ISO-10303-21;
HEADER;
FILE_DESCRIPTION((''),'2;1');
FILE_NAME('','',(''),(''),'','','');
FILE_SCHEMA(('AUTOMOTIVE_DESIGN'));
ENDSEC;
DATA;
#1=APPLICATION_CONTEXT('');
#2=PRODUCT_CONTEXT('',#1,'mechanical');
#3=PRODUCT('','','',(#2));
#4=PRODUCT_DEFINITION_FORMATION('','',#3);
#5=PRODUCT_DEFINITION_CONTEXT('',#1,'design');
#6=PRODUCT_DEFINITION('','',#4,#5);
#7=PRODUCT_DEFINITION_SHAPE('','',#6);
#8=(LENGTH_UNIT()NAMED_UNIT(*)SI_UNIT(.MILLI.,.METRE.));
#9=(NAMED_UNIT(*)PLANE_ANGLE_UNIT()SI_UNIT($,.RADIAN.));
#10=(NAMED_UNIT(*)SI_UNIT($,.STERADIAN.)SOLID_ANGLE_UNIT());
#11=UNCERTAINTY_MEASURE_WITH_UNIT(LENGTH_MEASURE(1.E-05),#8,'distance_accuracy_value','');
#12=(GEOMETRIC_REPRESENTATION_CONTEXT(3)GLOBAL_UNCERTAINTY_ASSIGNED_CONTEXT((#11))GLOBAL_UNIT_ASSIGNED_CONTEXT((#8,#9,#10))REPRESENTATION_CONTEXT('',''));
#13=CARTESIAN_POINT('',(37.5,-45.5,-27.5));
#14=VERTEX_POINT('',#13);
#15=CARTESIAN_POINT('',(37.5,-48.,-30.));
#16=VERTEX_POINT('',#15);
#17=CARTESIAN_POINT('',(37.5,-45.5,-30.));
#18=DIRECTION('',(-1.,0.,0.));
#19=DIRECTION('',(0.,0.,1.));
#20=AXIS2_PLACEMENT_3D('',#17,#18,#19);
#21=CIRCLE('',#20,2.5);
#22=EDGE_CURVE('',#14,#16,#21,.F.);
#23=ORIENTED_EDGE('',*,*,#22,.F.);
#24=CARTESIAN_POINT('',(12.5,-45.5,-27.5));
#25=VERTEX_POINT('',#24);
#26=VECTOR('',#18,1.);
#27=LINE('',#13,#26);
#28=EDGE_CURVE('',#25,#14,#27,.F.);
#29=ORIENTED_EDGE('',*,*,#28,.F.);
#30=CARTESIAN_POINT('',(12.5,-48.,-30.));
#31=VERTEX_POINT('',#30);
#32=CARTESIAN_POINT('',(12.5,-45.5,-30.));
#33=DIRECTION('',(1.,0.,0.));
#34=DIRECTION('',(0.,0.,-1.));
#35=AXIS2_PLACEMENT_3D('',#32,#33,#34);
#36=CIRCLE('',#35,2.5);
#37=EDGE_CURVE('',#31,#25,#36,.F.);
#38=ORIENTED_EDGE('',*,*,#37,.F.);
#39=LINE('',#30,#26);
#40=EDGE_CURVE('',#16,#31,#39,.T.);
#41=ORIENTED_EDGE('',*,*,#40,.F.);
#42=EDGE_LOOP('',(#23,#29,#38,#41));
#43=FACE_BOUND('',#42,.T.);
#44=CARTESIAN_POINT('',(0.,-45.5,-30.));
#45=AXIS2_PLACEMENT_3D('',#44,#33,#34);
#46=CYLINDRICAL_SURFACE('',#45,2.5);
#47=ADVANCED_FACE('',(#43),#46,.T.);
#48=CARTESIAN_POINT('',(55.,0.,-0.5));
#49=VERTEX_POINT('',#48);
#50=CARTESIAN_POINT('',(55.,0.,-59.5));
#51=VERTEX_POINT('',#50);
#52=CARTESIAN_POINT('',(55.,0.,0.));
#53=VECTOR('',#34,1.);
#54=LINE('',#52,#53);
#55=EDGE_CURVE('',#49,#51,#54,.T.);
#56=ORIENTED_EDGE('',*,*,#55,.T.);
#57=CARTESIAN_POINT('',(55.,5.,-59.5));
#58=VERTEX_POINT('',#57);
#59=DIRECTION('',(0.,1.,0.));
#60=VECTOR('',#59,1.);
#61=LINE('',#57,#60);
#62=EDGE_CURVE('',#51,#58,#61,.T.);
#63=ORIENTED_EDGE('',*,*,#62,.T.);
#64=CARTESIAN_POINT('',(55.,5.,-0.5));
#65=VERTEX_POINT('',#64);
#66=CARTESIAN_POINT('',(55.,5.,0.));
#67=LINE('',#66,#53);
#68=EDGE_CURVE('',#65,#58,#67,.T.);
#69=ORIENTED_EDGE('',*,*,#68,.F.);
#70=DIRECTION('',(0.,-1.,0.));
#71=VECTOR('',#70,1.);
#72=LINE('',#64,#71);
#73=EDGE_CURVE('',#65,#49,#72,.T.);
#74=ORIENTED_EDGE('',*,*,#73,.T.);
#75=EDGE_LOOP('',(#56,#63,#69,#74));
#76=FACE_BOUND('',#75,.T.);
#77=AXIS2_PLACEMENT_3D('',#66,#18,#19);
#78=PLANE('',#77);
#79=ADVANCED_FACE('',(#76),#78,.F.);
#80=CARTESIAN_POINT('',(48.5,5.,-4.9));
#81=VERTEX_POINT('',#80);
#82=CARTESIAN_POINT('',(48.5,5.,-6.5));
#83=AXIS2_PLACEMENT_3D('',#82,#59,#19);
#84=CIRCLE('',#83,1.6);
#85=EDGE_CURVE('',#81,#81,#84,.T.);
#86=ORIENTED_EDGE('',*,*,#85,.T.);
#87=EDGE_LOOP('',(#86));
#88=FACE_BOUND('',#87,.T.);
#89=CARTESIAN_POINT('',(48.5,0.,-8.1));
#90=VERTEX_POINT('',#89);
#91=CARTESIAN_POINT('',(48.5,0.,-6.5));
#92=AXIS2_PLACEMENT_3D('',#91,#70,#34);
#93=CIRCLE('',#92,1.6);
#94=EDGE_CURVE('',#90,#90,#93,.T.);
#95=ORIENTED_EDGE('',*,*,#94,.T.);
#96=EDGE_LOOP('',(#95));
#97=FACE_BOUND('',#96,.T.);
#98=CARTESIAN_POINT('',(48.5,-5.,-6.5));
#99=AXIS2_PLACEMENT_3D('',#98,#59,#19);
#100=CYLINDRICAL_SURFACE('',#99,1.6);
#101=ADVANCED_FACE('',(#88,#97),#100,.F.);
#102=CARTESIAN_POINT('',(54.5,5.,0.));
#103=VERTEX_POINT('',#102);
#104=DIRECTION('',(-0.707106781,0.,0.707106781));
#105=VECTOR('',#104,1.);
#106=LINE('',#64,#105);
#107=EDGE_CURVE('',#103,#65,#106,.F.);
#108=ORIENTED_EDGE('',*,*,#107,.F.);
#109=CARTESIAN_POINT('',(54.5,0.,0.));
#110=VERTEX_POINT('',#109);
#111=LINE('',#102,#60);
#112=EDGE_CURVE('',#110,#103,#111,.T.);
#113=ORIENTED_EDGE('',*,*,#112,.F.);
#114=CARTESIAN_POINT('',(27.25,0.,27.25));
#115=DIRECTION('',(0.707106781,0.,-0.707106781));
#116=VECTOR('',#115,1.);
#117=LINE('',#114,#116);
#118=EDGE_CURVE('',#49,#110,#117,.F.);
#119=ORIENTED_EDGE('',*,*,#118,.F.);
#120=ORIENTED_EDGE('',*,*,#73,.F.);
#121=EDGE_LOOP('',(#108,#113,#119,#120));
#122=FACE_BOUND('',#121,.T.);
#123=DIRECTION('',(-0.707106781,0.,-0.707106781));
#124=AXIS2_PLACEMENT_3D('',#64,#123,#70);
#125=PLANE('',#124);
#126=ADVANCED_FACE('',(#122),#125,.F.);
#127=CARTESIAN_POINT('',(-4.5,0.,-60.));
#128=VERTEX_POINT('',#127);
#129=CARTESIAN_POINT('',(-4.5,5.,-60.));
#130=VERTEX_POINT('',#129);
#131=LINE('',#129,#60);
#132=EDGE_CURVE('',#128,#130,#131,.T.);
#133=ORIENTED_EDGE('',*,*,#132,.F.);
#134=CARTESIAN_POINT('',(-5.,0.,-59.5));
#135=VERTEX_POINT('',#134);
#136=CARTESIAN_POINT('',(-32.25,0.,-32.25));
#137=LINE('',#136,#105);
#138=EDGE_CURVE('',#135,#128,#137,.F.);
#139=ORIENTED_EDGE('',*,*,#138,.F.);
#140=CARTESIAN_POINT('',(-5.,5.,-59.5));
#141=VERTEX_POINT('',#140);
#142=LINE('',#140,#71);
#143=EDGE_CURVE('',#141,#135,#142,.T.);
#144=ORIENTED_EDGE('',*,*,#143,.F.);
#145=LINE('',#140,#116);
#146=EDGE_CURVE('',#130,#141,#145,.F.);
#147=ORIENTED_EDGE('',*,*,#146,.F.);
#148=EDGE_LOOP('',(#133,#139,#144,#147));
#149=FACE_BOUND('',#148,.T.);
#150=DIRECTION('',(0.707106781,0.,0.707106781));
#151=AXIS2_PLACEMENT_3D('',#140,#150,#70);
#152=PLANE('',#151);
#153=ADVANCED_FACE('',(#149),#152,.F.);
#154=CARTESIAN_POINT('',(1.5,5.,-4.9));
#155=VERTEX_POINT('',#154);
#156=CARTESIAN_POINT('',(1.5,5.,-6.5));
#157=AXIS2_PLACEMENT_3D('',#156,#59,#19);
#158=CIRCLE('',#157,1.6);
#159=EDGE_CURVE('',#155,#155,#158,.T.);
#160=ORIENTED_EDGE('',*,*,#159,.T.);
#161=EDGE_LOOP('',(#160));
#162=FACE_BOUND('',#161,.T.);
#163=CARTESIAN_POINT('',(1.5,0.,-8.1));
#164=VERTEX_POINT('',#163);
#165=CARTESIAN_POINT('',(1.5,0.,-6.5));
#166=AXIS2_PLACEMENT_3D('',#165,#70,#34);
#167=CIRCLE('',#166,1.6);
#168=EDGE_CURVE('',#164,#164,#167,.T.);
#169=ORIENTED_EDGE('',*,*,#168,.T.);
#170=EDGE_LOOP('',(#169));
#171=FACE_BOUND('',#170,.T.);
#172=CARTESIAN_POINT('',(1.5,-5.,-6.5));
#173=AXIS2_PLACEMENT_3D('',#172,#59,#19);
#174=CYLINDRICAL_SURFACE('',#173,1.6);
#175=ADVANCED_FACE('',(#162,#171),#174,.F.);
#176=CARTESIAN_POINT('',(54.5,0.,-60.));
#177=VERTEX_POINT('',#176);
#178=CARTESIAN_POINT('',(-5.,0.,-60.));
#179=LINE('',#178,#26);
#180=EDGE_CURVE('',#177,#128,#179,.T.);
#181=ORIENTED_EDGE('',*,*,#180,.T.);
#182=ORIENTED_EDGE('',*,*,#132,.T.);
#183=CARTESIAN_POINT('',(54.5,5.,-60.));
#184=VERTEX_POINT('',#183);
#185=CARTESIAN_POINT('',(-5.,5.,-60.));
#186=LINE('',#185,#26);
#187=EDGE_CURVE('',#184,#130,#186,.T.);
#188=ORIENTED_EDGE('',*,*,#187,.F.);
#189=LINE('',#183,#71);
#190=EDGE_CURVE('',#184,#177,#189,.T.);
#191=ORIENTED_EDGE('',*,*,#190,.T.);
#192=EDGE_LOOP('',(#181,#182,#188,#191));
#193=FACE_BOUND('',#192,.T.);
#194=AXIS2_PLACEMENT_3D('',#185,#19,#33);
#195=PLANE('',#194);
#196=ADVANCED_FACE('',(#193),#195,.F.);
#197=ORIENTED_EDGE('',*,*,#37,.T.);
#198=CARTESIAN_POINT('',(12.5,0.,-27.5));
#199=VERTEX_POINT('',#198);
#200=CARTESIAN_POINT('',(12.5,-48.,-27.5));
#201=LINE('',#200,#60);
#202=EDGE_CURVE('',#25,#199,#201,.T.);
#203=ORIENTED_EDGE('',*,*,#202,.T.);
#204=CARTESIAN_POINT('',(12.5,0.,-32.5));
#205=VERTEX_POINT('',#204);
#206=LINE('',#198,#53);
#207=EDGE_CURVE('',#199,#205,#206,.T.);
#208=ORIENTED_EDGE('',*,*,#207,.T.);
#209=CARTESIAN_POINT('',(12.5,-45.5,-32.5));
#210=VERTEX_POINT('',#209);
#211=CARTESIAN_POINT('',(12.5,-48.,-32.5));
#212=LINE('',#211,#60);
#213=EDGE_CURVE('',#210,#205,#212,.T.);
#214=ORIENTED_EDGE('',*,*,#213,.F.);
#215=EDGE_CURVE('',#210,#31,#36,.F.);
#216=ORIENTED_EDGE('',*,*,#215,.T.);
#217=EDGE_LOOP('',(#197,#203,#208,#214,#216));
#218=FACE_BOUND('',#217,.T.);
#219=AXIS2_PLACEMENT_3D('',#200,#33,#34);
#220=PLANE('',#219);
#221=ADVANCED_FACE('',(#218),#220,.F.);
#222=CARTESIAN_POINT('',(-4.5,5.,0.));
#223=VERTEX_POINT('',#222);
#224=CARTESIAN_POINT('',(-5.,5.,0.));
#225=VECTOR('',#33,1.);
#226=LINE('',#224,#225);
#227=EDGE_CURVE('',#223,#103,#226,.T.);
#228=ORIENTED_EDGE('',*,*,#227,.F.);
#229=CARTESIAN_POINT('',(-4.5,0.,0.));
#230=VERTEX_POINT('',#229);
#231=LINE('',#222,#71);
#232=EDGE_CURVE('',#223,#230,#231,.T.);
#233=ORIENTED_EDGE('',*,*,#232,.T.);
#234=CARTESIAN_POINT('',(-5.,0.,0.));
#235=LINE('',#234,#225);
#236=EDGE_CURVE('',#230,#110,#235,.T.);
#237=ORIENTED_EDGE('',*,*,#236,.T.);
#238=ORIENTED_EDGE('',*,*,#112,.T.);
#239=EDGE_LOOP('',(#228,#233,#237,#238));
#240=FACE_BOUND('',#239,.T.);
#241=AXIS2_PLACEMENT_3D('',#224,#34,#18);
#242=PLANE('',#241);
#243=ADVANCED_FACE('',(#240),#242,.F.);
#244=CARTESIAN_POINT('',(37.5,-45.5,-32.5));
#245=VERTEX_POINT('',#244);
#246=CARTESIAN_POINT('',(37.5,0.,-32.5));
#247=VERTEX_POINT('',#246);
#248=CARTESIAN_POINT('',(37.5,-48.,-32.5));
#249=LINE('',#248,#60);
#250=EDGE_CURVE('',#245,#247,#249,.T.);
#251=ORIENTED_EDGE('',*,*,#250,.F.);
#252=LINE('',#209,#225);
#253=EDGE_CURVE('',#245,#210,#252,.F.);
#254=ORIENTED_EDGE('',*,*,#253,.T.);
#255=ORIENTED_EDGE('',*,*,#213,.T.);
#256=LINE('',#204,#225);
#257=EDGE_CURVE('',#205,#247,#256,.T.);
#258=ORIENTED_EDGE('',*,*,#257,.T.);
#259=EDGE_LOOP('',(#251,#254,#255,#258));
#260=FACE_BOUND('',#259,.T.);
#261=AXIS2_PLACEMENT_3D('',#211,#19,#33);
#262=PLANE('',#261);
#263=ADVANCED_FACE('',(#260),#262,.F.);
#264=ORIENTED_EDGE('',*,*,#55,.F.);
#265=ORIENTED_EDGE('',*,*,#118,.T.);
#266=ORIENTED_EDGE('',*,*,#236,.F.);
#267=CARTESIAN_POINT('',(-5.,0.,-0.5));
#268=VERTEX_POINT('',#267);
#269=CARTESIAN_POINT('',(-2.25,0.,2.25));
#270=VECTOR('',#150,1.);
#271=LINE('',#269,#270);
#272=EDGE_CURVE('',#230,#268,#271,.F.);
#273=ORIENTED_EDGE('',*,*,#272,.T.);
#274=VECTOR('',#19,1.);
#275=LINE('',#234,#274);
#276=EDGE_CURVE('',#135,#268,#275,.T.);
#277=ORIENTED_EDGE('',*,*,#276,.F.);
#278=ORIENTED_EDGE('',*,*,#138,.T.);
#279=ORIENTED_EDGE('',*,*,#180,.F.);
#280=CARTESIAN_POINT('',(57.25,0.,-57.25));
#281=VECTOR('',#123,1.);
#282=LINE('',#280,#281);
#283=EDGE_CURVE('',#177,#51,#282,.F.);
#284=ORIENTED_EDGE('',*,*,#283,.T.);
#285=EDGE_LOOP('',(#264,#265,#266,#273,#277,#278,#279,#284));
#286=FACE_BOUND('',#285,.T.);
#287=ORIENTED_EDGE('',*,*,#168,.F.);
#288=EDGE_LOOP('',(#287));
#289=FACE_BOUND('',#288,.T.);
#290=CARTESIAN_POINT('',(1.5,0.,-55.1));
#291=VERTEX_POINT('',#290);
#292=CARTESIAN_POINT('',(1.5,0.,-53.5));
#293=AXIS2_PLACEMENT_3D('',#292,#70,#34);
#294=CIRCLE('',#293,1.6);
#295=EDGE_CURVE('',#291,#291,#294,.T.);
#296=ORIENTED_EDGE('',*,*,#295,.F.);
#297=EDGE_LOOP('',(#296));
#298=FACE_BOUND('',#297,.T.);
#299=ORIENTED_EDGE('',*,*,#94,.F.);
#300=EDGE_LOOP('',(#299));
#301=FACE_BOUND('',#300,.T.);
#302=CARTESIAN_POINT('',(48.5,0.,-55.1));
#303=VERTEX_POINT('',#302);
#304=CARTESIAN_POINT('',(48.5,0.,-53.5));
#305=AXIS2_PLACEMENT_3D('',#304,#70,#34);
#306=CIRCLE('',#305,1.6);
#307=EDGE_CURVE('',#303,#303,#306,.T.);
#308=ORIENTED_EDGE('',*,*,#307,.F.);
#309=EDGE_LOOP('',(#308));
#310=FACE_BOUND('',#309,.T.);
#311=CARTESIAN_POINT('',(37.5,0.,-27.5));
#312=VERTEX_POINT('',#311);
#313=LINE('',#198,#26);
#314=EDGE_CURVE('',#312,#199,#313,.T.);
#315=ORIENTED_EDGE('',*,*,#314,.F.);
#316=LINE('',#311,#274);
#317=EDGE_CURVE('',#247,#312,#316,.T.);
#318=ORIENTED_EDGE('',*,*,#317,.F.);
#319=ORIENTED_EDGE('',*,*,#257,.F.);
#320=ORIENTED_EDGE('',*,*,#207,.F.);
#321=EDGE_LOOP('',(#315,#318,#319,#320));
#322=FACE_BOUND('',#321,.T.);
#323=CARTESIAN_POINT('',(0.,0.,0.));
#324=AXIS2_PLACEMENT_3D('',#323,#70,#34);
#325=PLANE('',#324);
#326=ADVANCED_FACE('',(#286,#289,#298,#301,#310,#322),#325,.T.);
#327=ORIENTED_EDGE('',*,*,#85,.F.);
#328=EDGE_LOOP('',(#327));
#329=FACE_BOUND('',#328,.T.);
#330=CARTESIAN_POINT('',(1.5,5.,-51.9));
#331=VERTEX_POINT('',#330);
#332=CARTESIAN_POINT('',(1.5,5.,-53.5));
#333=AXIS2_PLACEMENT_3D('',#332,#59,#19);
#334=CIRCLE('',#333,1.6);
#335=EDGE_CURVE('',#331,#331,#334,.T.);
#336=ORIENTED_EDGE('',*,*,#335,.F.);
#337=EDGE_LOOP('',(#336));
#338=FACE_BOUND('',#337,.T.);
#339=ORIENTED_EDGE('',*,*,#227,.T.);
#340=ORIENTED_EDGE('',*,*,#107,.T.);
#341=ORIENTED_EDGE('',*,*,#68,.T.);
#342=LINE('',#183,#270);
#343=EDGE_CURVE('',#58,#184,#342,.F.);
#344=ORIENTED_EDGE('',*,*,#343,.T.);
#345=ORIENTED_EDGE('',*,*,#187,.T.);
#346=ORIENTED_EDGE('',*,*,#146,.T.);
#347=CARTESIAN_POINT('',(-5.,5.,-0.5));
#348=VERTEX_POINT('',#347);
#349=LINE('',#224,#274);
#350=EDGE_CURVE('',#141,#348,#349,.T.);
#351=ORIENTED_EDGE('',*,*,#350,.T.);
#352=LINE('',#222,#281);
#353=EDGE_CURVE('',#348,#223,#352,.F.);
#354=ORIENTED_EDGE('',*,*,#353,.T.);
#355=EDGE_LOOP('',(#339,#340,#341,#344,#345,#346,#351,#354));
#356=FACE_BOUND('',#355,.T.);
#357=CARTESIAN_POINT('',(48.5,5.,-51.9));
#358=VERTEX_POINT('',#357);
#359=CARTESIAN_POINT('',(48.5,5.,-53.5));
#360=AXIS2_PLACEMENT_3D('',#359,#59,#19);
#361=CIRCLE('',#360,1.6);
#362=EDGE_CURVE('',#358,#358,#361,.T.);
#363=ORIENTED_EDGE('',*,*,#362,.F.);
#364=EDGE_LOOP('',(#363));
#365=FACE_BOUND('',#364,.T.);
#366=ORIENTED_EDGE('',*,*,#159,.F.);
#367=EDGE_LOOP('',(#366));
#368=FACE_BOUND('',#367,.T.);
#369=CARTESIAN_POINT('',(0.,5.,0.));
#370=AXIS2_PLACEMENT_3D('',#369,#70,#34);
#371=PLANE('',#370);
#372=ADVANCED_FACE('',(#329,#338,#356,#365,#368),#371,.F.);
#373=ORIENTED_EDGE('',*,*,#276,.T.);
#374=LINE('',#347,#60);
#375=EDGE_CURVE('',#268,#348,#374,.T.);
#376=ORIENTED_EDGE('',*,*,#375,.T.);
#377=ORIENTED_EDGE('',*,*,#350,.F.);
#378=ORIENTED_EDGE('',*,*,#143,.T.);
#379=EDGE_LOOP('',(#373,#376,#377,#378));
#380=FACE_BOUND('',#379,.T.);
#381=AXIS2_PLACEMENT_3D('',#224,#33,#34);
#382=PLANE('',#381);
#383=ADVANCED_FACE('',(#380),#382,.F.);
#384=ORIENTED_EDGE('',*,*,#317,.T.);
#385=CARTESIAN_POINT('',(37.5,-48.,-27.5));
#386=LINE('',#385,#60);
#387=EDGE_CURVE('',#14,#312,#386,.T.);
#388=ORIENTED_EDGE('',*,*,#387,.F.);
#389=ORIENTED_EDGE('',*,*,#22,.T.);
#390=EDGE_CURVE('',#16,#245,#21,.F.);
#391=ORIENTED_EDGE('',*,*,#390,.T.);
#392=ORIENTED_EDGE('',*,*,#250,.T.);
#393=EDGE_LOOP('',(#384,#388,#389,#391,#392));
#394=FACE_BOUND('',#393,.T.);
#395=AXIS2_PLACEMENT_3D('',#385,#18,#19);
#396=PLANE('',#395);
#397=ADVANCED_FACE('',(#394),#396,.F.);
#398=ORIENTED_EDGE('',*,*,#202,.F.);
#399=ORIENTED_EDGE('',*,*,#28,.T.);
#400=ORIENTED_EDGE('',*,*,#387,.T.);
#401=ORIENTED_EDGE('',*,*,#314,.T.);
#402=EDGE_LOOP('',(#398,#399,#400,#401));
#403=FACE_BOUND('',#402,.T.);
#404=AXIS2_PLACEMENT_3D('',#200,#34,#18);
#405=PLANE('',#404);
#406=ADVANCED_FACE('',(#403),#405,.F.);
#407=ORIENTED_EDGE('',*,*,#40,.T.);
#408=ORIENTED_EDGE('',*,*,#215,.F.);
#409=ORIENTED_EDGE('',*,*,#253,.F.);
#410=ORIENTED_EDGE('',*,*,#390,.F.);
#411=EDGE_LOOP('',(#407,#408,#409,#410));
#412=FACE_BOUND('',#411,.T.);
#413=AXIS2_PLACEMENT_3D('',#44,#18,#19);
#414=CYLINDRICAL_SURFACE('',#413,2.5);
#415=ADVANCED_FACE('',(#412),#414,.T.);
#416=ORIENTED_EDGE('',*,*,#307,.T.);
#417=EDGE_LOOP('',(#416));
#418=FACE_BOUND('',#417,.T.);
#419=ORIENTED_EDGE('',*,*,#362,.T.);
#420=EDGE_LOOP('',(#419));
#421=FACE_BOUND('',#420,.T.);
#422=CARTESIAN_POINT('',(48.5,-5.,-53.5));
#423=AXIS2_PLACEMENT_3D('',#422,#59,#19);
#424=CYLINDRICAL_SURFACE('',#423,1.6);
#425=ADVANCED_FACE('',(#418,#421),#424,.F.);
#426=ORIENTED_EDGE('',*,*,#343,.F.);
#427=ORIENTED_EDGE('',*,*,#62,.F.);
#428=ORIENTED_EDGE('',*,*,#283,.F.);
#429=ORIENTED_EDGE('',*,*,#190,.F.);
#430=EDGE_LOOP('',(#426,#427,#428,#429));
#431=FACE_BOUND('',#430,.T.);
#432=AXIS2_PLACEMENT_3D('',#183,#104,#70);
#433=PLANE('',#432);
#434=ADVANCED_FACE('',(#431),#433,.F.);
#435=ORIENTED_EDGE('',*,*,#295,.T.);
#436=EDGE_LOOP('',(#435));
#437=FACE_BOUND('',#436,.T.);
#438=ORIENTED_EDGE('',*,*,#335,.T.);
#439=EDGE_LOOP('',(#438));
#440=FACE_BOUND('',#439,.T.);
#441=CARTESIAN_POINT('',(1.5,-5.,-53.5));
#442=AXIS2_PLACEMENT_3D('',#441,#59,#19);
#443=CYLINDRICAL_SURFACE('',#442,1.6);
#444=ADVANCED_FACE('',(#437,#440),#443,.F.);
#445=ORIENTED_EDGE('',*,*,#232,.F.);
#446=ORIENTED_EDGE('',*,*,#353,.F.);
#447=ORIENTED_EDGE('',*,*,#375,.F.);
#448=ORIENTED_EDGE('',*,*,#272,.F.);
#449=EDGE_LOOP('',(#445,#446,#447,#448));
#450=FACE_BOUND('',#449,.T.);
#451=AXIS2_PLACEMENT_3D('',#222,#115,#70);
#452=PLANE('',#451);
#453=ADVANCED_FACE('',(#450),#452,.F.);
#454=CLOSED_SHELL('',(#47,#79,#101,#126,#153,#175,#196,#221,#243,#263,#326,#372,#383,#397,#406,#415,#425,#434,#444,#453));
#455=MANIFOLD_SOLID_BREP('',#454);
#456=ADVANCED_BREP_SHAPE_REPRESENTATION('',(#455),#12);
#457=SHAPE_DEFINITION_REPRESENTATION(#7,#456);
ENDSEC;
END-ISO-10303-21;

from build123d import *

# Parameters (mm, degrees)
SKIZZE1_W                       = 60
SKIZZE1_H                       = 60
AUFSATZ_LINEAR_AUSTRAGEN1_DEPTH = 5
SKIZZE7_R                       = 1.6
SCHNITT_LINEAR_AUSTRAGEN1_DEPTH = 10
FASE1_SIZE                      = 0.5
SKIZZE8_W                       = 25
SKIZZE8_H                       = 5
AUFSATZ_LINEAR_AUSTRAGEN2_DEPTH = 48
VERRUNDUNG3_R                   = 2.5


with BuildPart() as part:
    # Skizze1 → Aufsatz-Linear austragen1 (new body)
    with BuildSketch(Plane(origin=(0, 0, 0), x_dir=(1, 0, 0), z_dir=(0, 1, 0))):
        with Locations((25, 30)):
            Rectangle(SKIZZE1_W, SKIZZE1_H)
    extrude(amount=AUFSATZ_LINEAR_AUSTRAGEN1_DEPTH)

    # Skizze7 → Schnitt-Linear austragen1 (cut)
    with BuildSketch(Plane(origin=(0, 5, 0), x_dir=(1, 0, 0), z_dir=(0, 1, 0))):
        with Locations(Location((1.5, 53.5, 0), (0, 0, 270))):
            Circle(SKIZZE7_R)
        with Locations(Location((48.5, 53.5, 0), (0, 0, 270))):
            Circle(SKIZZE7_R)
        with Locations(Location((48.5, 6.5, 0), (0, 0, 270))):
            Circle(SKIZZE7_R)
        with Locations(Location((1.5, 6.5, 0), (0, 0, 270))):
            Circle(SKIZZE7_R)
    extrude(amount=-SCHNITT_LINEAR_AUSTRAGEN1_DEPTH, mode=Mode.SUBTRACT)

    # Fase1
    fase1_edges = [part.edges().sort_by_distance(p)[0] for p in [
        (-5, 2.5, -60),
        (55, 2.5, -60),
        (55, 2.5, 0),
        (-5, 2.5, 0),
    ]]
    chamfer(fase1_edges, length=FASE1_SIZE)

    # Skizze8 → Aufsatz-Linear austragen2 (add)
    with BuildSketch(Plane.XZ):
        with Locations((25, -30)):
            Rectangle(SKIZZE8_W, SKIZZE8_H)
    extrude(amount=AUFSATZ_LINEAR_AUSTRAGEN2_DEPTH)

    # Verrundung3
    verrundung3_edges = [part.edges().sort_by_distance(p)[0] for p in [
        (25, -48, -32.5),
        (25, -48, -27.5),
    ]]
    fillet(verrundung3_edges, radius=VERRUNDUNG3_R - 0.0001)  # a hair under: the kernel refuses the full size


solid = part.part
